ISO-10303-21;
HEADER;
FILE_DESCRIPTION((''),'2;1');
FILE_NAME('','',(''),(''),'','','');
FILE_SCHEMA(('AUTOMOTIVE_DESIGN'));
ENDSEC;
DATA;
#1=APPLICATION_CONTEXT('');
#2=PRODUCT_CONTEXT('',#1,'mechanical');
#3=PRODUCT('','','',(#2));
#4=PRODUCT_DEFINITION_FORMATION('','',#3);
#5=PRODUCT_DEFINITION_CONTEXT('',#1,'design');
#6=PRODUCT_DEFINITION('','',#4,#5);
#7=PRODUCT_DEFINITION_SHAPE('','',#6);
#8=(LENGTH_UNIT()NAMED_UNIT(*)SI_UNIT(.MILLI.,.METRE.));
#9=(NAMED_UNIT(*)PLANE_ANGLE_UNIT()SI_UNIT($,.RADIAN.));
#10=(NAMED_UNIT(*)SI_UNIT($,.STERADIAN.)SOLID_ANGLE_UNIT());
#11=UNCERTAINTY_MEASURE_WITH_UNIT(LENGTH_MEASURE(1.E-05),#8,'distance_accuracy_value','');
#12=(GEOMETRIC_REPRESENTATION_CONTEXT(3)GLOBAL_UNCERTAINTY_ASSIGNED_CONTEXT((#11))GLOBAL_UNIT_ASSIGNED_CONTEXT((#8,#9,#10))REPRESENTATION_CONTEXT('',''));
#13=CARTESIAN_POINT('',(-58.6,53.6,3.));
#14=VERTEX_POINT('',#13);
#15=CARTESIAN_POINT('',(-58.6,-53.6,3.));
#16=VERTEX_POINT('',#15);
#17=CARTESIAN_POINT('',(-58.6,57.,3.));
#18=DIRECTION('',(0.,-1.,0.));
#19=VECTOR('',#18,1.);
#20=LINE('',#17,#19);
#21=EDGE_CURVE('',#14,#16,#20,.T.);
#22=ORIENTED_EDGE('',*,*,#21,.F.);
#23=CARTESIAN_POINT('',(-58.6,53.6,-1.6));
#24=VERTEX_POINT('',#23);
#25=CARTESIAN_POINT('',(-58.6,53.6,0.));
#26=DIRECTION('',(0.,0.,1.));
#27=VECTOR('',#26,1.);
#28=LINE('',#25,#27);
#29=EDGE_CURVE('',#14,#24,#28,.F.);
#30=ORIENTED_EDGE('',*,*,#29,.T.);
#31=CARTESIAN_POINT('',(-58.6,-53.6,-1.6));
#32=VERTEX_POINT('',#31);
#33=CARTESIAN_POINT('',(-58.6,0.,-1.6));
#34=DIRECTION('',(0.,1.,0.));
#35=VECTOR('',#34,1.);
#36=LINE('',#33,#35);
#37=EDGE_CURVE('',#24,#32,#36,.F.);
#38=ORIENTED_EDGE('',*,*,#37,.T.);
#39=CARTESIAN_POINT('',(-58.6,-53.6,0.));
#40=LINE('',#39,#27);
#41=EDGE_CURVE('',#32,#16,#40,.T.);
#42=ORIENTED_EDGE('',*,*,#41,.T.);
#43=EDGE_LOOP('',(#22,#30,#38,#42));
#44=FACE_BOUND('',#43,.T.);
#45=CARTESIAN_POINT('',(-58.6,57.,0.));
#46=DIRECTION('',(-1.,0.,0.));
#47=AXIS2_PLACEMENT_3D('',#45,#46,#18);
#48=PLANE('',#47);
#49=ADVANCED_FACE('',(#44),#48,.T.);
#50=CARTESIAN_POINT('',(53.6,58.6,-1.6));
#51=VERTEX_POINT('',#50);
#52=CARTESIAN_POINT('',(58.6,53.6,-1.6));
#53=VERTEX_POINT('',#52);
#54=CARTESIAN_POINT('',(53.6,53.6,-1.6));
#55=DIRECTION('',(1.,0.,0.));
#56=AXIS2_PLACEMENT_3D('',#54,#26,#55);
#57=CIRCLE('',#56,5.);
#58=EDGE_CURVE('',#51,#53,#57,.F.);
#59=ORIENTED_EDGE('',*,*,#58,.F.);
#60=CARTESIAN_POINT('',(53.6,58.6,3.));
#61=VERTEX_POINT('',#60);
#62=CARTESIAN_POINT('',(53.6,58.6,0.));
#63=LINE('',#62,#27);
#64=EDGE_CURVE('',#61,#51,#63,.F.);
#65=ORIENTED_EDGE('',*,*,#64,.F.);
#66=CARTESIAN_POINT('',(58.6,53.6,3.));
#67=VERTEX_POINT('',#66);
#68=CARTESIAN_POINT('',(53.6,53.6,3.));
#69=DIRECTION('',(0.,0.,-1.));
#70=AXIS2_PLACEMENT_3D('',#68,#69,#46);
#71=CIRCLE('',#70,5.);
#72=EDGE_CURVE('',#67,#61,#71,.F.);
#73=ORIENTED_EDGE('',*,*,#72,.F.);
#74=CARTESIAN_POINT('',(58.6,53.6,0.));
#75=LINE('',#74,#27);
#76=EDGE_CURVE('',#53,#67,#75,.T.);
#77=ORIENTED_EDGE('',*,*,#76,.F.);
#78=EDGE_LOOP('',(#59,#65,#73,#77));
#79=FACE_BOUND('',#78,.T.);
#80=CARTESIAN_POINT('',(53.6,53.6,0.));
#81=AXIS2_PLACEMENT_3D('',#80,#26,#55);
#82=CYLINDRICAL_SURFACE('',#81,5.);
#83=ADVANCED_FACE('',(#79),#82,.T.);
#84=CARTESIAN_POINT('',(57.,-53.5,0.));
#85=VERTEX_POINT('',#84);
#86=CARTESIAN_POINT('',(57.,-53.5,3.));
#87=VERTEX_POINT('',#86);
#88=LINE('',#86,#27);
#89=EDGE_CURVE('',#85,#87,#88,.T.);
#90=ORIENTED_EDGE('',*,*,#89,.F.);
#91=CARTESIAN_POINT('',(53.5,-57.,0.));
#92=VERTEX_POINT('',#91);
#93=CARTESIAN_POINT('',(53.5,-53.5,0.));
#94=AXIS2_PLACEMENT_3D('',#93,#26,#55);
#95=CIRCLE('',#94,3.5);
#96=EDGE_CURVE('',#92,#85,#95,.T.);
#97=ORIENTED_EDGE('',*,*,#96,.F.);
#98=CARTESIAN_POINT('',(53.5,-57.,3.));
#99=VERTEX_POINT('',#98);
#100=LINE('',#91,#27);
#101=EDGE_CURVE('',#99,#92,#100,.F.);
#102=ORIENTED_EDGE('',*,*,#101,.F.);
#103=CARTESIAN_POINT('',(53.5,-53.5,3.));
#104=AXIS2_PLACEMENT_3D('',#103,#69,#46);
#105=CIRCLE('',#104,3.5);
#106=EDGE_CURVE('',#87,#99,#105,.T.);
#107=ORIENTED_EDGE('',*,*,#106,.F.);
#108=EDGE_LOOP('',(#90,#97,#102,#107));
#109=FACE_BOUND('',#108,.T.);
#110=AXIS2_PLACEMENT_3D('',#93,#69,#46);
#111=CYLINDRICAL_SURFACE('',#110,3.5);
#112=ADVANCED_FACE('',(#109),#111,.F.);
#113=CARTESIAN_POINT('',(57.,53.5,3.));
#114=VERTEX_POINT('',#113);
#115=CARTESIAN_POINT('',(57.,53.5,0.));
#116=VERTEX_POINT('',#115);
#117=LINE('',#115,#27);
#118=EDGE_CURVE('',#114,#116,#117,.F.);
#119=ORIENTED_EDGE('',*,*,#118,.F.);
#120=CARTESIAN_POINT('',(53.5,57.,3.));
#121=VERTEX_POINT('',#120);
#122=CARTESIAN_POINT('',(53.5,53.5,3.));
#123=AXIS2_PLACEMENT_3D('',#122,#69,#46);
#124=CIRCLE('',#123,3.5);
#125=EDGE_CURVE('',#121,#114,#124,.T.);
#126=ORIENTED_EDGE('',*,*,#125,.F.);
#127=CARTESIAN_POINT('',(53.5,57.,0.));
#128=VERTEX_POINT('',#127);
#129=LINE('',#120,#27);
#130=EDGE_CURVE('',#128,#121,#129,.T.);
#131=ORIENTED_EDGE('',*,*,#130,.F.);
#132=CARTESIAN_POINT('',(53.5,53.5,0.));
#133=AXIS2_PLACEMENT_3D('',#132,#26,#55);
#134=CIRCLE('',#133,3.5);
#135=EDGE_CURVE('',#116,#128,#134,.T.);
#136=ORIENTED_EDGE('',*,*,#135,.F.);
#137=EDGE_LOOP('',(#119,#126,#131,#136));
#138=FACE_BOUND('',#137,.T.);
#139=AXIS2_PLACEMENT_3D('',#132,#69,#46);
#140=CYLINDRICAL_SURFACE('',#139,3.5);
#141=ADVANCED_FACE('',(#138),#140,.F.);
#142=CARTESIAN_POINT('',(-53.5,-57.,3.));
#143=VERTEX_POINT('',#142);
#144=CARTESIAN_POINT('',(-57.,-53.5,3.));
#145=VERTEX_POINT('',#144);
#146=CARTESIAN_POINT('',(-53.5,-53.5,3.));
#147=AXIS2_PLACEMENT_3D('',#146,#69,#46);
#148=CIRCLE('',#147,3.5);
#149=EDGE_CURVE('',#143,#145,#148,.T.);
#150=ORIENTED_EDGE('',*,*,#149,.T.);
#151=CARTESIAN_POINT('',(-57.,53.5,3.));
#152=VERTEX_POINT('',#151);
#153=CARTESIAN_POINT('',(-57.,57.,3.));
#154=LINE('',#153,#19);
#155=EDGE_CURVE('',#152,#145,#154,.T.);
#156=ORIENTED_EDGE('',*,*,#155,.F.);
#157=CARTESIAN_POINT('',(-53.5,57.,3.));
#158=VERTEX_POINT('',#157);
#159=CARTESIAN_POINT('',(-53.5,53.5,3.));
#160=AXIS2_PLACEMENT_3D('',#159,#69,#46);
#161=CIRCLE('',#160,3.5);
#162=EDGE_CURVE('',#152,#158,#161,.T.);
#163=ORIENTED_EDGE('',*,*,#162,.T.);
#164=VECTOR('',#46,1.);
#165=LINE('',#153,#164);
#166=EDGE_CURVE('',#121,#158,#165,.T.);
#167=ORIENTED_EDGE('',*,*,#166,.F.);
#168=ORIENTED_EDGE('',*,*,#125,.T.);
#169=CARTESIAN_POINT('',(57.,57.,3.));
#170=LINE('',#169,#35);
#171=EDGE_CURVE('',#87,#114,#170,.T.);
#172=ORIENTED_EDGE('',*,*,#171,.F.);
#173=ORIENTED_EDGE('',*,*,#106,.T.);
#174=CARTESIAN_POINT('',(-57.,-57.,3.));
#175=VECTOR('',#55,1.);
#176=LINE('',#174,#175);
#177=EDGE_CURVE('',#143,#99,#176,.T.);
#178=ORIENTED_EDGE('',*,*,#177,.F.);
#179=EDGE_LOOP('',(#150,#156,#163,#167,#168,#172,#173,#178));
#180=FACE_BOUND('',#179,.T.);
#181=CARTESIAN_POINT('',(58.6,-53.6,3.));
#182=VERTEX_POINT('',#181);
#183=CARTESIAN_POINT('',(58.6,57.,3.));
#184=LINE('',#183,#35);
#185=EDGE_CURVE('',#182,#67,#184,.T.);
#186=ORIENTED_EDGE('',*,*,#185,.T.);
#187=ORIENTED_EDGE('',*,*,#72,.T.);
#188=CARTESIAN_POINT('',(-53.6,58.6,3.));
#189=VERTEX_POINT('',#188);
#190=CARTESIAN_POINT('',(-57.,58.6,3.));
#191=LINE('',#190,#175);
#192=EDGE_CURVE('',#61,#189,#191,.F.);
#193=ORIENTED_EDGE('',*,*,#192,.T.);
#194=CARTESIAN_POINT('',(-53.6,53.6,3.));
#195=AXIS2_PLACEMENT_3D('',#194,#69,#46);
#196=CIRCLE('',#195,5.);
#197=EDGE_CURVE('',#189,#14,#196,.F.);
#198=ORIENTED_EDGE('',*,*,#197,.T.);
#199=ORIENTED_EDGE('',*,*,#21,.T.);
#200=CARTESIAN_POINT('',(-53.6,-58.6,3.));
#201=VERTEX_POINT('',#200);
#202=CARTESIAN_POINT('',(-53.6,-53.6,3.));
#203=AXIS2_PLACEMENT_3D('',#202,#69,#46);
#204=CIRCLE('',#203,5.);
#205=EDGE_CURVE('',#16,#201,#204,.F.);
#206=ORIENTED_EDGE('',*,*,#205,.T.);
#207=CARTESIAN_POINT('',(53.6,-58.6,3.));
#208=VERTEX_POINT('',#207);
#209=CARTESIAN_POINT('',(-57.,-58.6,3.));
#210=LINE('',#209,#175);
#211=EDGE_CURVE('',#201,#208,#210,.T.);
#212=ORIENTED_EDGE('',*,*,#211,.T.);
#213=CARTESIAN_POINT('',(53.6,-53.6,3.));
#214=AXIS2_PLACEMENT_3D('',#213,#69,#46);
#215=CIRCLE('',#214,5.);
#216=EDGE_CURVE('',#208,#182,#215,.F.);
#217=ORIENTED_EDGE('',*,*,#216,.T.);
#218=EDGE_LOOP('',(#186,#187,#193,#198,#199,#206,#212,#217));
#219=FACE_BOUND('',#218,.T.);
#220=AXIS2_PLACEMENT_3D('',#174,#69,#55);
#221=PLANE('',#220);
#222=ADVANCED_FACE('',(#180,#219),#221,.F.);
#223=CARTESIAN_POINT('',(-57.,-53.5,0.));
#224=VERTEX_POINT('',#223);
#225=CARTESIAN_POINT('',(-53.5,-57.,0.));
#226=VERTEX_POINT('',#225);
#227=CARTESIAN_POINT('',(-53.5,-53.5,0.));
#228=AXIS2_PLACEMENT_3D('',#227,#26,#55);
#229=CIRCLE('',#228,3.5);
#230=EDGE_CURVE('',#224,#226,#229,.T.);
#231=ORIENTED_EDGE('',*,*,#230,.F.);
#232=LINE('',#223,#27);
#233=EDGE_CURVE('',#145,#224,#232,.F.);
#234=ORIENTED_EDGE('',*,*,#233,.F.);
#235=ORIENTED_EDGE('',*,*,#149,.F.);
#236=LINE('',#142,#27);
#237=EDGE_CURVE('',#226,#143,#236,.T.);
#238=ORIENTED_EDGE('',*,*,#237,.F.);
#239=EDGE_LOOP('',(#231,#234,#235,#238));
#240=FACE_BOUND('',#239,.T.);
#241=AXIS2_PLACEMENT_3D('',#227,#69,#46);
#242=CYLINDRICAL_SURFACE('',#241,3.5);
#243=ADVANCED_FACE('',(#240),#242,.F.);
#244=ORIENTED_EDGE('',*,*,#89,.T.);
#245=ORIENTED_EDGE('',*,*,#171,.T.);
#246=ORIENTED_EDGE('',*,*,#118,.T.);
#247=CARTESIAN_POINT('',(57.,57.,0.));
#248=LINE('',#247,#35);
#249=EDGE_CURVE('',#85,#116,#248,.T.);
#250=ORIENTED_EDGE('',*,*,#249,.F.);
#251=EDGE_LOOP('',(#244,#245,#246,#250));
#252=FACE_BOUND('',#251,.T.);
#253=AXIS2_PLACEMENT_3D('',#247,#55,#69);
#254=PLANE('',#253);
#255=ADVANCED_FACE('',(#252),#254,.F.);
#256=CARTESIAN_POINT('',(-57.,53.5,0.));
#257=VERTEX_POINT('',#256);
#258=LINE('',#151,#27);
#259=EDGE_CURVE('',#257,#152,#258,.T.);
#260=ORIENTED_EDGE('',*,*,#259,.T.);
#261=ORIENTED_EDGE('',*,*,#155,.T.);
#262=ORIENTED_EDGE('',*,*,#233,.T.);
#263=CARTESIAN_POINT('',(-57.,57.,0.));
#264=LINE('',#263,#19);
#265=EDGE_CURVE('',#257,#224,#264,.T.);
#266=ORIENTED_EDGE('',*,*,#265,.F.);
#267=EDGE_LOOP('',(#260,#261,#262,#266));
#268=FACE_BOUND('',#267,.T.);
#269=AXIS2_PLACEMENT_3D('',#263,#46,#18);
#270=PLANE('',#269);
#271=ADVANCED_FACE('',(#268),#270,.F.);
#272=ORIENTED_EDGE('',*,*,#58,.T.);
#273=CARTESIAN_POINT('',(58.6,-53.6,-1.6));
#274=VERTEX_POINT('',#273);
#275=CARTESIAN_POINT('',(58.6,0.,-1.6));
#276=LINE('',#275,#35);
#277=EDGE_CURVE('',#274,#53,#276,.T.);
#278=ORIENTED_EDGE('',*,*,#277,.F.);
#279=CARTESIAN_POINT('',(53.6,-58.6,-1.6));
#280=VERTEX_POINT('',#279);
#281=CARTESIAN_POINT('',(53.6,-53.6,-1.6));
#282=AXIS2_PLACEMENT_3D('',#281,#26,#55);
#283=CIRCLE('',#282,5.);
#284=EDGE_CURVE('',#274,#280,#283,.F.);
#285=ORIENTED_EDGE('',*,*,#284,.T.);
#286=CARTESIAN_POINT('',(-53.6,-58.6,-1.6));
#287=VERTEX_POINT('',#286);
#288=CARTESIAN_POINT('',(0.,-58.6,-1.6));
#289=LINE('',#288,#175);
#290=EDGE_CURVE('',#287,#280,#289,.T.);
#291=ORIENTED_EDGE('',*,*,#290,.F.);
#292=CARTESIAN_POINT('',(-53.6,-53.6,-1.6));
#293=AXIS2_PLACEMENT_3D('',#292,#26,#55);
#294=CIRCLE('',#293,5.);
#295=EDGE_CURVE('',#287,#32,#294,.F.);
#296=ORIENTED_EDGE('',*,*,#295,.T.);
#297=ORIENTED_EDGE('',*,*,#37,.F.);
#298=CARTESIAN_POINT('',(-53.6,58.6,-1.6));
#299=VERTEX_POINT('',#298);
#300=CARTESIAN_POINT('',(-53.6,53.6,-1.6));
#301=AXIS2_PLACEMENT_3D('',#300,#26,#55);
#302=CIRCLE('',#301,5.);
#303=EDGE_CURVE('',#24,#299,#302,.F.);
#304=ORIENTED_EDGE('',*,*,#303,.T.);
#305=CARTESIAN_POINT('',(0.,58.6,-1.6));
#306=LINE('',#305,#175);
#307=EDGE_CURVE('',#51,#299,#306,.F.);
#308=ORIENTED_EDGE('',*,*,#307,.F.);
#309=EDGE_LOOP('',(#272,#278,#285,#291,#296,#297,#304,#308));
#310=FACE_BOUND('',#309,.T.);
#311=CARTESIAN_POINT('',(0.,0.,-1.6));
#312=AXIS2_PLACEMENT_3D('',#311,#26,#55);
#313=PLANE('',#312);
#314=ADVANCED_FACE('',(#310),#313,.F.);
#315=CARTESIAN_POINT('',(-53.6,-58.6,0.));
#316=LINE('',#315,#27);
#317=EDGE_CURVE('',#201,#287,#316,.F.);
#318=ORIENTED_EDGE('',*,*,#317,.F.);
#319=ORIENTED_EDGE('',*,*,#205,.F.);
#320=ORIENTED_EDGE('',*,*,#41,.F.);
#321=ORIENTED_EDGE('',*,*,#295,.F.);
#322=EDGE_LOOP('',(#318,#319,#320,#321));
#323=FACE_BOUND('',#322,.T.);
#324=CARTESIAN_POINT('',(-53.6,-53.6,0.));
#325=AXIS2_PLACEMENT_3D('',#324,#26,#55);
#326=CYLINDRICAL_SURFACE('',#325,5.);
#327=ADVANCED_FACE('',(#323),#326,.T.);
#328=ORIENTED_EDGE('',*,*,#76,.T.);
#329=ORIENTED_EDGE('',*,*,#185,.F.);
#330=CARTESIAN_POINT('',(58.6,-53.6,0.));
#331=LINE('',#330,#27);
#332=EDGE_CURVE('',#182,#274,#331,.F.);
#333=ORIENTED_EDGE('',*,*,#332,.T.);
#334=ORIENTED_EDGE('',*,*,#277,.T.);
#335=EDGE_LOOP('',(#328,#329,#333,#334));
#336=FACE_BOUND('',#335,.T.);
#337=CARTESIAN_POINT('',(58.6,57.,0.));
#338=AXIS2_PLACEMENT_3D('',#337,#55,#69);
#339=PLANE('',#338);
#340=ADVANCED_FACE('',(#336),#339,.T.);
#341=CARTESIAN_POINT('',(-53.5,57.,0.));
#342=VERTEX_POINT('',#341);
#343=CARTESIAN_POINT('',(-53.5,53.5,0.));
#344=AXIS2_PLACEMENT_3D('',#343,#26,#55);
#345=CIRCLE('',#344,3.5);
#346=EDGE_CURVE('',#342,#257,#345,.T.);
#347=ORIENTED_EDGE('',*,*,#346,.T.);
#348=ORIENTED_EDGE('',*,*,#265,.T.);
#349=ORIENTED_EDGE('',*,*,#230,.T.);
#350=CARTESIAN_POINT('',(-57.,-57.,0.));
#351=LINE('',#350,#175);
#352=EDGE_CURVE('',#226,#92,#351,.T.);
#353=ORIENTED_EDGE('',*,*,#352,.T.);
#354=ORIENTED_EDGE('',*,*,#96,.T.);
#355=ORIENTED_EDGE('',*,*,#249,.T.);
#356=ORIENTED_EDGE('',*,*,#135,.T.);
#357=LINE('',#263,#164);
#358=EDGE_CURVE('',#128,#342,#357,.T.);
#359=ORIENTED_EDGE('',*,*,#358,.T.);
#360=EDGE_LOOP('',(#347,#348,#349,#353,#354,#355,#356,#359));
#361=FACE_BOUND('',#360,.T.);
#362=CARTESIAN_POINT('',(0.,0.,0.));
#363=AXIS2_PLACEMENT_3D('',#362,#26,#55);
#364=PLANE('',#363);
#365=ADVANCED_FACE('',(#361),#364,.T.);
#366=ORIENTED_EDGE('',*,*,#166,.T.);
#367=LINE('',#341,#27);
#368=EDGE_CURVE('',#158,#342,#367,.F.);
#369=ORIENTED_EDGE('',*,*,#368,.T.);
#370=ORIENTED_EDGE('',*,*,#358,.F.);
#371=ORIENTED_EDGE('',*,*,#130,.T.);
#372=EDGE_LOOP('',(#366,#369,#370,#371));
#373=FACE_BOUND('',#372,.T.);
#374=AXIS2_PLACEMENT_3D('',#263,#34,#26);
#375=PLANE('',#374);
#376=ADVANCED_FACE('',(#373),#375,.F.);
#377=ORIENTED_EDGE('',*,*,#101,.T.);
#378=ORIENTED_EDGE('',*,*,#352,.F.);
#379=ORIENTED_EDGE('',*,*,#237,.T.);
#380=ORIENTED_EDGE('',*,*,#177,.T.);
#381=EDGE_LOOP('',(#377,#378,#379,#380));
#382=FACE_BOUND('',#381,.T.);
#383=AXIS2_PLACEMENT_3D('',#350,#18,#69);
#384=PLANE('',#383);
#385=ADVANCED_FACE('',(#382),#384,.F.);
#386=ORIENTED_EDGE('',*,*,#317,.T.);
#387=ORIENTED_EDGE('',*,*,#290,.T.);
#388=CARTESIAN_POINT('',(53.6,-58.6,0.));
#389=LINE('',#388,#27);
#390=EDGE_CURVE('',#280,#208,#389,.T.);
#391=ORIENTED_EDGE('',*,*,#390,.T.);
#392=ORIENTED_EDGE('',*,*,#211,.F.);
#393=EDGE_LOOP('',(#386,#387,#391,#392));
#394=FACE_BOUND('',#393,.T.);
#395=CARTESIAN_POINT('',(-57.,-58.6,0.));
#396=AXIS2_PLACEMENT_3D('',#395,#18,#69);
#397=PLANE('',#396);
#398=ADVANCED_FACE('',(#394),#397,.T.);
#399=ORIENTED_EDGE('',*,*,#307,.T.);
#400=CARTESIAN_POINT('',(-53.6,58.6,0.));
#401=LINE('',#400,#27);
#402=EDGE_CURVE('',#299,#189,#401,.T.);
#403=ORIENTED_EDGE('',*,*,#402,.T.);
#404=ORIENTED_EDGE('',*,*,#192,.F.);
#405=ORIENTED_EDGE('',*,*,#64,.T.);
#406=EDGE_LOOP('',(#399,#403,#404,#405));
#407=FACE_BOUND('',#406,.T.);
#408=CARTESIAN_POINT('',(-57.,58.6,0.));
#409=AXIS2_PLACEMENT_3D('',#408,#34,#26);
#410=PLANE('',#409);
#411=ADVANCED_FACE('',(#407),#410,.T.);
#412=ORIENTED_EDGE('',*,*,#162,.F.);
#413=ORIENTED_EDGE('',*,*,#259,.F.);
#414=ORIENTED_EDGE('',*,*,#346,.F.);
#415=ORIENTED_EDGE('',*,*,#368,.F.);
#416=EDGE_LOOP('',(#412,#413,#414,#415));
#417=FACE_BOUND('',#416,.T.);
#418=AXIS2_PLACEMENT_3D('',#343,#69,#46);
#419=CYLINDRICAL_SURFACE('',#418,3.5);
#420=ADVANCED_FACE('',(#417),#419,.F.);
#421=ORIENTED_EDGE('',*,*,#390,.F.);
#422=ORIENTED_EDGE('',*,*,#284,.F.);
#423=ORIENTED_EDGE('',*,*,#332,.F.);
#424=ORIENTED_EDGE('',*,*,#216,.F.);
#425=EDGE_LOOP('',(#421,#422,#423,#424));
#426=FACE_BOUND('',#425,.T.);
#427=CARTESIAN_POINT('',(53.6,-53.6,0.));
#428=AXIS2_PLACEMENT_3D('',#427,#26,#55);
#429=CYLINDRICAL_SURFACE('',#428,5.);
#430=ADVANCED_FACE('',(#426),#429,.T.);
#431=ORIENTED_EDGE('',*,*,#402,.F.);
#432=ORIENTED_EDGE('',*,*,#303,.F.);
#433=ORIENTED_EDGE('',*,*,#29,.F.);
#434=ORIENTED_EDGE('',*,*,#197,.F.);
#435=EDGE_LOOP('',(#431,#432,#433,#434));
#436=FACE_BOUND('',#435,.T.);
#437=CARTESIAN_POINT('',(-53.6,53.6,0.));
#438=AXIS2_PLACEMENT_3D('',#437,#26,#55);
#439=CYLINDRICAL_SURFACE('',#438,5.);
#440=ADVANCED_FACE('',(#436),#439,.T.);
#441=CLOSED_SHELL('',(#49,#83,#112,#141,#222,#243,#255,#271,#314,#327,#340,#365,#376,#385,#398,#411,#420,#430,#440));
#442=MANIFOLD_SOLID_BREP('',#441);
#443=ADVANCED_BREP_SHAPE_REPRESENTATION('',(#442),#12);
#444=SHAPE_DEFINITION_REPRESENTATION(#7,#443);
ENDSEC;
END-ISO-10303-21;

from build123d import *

# Parameters (mm, degrees)
SURFACE_EXTRUDE1_1_DEPTH = 3
THICKEN1_T1              = 1.6
THICKEN2_START           = -58.6
THICKEN2_OUTLINE_W       = 117.2
THICKEN2_OUTLINE_H       = 1.6
THICKEN2_DEPTH           = 117.2
FILLET2_R                = 5
FILLET3_R                = 3.5


# Read off the part's stored shape, not the designer's step: Thicken2
with BuildPart() as body_1:
    # Surface-Extrude1: a surface, the sketch's curves swept straight by 3 mm
    with BuildLine(Plane.XY, mode=Mode.PRIVATE) as surface_extrude1_1_path:
        Line((-57, 57), (57, 57))
        Line((57, 57), (57, -57))
        Line((57, -57), (-57, -57))
        Line((-57, -57), (-57, 57))
    surface_extrude1_1 = Shell.extrude(surface_extrude1_1_path.wire(), (0 * SURFACE_EXTRUDE1_1_DEPTH, 0 * SURFACE_EXTRUDE1_1_DEPTH, 1 * SURFACE_EXTRUDE1_1_DEPTH))
    add(Solid.thicken(surface_extrude1_1, THICKEN1_T1))

    # Thicken2 outline → Thicken2 (add)
    with BuildSketch(Plane.YZ.offset(THICKEN2_START)):
        with Locations((0, -0.8)):
            Rectangle(THICKEN2_OUTLINE_W, THICKEN2_OUTLINE_H)
    extrude(amount=THICKEN2_DEPTH)

    # Fillet2
    fillet2_edges = [body_1.edges().sort_by_distance(p)[0] for p in [
        (58.6, 58.6, 0.7),
        (-58.6, 58.6, 0.7),
        (58.6, -58.6, 0.7),
        (-58.6, -58.6, 0.7),
    ]]
    fillet(fillet2_edges, radius=FILLET2_R)

    # Fillet3
    fillet3_edges = [body_1.edges().sort_by_distance(p)[0] for p in [
        (57, 57, 1.5),
        (-57, 57, 1.5),
        (57, -57, 1.5),
        (-57, -57, 1.5),
    ]]
    fillet(fillet3_edges, radius=FILLET3_R)


solid = body_1.part
